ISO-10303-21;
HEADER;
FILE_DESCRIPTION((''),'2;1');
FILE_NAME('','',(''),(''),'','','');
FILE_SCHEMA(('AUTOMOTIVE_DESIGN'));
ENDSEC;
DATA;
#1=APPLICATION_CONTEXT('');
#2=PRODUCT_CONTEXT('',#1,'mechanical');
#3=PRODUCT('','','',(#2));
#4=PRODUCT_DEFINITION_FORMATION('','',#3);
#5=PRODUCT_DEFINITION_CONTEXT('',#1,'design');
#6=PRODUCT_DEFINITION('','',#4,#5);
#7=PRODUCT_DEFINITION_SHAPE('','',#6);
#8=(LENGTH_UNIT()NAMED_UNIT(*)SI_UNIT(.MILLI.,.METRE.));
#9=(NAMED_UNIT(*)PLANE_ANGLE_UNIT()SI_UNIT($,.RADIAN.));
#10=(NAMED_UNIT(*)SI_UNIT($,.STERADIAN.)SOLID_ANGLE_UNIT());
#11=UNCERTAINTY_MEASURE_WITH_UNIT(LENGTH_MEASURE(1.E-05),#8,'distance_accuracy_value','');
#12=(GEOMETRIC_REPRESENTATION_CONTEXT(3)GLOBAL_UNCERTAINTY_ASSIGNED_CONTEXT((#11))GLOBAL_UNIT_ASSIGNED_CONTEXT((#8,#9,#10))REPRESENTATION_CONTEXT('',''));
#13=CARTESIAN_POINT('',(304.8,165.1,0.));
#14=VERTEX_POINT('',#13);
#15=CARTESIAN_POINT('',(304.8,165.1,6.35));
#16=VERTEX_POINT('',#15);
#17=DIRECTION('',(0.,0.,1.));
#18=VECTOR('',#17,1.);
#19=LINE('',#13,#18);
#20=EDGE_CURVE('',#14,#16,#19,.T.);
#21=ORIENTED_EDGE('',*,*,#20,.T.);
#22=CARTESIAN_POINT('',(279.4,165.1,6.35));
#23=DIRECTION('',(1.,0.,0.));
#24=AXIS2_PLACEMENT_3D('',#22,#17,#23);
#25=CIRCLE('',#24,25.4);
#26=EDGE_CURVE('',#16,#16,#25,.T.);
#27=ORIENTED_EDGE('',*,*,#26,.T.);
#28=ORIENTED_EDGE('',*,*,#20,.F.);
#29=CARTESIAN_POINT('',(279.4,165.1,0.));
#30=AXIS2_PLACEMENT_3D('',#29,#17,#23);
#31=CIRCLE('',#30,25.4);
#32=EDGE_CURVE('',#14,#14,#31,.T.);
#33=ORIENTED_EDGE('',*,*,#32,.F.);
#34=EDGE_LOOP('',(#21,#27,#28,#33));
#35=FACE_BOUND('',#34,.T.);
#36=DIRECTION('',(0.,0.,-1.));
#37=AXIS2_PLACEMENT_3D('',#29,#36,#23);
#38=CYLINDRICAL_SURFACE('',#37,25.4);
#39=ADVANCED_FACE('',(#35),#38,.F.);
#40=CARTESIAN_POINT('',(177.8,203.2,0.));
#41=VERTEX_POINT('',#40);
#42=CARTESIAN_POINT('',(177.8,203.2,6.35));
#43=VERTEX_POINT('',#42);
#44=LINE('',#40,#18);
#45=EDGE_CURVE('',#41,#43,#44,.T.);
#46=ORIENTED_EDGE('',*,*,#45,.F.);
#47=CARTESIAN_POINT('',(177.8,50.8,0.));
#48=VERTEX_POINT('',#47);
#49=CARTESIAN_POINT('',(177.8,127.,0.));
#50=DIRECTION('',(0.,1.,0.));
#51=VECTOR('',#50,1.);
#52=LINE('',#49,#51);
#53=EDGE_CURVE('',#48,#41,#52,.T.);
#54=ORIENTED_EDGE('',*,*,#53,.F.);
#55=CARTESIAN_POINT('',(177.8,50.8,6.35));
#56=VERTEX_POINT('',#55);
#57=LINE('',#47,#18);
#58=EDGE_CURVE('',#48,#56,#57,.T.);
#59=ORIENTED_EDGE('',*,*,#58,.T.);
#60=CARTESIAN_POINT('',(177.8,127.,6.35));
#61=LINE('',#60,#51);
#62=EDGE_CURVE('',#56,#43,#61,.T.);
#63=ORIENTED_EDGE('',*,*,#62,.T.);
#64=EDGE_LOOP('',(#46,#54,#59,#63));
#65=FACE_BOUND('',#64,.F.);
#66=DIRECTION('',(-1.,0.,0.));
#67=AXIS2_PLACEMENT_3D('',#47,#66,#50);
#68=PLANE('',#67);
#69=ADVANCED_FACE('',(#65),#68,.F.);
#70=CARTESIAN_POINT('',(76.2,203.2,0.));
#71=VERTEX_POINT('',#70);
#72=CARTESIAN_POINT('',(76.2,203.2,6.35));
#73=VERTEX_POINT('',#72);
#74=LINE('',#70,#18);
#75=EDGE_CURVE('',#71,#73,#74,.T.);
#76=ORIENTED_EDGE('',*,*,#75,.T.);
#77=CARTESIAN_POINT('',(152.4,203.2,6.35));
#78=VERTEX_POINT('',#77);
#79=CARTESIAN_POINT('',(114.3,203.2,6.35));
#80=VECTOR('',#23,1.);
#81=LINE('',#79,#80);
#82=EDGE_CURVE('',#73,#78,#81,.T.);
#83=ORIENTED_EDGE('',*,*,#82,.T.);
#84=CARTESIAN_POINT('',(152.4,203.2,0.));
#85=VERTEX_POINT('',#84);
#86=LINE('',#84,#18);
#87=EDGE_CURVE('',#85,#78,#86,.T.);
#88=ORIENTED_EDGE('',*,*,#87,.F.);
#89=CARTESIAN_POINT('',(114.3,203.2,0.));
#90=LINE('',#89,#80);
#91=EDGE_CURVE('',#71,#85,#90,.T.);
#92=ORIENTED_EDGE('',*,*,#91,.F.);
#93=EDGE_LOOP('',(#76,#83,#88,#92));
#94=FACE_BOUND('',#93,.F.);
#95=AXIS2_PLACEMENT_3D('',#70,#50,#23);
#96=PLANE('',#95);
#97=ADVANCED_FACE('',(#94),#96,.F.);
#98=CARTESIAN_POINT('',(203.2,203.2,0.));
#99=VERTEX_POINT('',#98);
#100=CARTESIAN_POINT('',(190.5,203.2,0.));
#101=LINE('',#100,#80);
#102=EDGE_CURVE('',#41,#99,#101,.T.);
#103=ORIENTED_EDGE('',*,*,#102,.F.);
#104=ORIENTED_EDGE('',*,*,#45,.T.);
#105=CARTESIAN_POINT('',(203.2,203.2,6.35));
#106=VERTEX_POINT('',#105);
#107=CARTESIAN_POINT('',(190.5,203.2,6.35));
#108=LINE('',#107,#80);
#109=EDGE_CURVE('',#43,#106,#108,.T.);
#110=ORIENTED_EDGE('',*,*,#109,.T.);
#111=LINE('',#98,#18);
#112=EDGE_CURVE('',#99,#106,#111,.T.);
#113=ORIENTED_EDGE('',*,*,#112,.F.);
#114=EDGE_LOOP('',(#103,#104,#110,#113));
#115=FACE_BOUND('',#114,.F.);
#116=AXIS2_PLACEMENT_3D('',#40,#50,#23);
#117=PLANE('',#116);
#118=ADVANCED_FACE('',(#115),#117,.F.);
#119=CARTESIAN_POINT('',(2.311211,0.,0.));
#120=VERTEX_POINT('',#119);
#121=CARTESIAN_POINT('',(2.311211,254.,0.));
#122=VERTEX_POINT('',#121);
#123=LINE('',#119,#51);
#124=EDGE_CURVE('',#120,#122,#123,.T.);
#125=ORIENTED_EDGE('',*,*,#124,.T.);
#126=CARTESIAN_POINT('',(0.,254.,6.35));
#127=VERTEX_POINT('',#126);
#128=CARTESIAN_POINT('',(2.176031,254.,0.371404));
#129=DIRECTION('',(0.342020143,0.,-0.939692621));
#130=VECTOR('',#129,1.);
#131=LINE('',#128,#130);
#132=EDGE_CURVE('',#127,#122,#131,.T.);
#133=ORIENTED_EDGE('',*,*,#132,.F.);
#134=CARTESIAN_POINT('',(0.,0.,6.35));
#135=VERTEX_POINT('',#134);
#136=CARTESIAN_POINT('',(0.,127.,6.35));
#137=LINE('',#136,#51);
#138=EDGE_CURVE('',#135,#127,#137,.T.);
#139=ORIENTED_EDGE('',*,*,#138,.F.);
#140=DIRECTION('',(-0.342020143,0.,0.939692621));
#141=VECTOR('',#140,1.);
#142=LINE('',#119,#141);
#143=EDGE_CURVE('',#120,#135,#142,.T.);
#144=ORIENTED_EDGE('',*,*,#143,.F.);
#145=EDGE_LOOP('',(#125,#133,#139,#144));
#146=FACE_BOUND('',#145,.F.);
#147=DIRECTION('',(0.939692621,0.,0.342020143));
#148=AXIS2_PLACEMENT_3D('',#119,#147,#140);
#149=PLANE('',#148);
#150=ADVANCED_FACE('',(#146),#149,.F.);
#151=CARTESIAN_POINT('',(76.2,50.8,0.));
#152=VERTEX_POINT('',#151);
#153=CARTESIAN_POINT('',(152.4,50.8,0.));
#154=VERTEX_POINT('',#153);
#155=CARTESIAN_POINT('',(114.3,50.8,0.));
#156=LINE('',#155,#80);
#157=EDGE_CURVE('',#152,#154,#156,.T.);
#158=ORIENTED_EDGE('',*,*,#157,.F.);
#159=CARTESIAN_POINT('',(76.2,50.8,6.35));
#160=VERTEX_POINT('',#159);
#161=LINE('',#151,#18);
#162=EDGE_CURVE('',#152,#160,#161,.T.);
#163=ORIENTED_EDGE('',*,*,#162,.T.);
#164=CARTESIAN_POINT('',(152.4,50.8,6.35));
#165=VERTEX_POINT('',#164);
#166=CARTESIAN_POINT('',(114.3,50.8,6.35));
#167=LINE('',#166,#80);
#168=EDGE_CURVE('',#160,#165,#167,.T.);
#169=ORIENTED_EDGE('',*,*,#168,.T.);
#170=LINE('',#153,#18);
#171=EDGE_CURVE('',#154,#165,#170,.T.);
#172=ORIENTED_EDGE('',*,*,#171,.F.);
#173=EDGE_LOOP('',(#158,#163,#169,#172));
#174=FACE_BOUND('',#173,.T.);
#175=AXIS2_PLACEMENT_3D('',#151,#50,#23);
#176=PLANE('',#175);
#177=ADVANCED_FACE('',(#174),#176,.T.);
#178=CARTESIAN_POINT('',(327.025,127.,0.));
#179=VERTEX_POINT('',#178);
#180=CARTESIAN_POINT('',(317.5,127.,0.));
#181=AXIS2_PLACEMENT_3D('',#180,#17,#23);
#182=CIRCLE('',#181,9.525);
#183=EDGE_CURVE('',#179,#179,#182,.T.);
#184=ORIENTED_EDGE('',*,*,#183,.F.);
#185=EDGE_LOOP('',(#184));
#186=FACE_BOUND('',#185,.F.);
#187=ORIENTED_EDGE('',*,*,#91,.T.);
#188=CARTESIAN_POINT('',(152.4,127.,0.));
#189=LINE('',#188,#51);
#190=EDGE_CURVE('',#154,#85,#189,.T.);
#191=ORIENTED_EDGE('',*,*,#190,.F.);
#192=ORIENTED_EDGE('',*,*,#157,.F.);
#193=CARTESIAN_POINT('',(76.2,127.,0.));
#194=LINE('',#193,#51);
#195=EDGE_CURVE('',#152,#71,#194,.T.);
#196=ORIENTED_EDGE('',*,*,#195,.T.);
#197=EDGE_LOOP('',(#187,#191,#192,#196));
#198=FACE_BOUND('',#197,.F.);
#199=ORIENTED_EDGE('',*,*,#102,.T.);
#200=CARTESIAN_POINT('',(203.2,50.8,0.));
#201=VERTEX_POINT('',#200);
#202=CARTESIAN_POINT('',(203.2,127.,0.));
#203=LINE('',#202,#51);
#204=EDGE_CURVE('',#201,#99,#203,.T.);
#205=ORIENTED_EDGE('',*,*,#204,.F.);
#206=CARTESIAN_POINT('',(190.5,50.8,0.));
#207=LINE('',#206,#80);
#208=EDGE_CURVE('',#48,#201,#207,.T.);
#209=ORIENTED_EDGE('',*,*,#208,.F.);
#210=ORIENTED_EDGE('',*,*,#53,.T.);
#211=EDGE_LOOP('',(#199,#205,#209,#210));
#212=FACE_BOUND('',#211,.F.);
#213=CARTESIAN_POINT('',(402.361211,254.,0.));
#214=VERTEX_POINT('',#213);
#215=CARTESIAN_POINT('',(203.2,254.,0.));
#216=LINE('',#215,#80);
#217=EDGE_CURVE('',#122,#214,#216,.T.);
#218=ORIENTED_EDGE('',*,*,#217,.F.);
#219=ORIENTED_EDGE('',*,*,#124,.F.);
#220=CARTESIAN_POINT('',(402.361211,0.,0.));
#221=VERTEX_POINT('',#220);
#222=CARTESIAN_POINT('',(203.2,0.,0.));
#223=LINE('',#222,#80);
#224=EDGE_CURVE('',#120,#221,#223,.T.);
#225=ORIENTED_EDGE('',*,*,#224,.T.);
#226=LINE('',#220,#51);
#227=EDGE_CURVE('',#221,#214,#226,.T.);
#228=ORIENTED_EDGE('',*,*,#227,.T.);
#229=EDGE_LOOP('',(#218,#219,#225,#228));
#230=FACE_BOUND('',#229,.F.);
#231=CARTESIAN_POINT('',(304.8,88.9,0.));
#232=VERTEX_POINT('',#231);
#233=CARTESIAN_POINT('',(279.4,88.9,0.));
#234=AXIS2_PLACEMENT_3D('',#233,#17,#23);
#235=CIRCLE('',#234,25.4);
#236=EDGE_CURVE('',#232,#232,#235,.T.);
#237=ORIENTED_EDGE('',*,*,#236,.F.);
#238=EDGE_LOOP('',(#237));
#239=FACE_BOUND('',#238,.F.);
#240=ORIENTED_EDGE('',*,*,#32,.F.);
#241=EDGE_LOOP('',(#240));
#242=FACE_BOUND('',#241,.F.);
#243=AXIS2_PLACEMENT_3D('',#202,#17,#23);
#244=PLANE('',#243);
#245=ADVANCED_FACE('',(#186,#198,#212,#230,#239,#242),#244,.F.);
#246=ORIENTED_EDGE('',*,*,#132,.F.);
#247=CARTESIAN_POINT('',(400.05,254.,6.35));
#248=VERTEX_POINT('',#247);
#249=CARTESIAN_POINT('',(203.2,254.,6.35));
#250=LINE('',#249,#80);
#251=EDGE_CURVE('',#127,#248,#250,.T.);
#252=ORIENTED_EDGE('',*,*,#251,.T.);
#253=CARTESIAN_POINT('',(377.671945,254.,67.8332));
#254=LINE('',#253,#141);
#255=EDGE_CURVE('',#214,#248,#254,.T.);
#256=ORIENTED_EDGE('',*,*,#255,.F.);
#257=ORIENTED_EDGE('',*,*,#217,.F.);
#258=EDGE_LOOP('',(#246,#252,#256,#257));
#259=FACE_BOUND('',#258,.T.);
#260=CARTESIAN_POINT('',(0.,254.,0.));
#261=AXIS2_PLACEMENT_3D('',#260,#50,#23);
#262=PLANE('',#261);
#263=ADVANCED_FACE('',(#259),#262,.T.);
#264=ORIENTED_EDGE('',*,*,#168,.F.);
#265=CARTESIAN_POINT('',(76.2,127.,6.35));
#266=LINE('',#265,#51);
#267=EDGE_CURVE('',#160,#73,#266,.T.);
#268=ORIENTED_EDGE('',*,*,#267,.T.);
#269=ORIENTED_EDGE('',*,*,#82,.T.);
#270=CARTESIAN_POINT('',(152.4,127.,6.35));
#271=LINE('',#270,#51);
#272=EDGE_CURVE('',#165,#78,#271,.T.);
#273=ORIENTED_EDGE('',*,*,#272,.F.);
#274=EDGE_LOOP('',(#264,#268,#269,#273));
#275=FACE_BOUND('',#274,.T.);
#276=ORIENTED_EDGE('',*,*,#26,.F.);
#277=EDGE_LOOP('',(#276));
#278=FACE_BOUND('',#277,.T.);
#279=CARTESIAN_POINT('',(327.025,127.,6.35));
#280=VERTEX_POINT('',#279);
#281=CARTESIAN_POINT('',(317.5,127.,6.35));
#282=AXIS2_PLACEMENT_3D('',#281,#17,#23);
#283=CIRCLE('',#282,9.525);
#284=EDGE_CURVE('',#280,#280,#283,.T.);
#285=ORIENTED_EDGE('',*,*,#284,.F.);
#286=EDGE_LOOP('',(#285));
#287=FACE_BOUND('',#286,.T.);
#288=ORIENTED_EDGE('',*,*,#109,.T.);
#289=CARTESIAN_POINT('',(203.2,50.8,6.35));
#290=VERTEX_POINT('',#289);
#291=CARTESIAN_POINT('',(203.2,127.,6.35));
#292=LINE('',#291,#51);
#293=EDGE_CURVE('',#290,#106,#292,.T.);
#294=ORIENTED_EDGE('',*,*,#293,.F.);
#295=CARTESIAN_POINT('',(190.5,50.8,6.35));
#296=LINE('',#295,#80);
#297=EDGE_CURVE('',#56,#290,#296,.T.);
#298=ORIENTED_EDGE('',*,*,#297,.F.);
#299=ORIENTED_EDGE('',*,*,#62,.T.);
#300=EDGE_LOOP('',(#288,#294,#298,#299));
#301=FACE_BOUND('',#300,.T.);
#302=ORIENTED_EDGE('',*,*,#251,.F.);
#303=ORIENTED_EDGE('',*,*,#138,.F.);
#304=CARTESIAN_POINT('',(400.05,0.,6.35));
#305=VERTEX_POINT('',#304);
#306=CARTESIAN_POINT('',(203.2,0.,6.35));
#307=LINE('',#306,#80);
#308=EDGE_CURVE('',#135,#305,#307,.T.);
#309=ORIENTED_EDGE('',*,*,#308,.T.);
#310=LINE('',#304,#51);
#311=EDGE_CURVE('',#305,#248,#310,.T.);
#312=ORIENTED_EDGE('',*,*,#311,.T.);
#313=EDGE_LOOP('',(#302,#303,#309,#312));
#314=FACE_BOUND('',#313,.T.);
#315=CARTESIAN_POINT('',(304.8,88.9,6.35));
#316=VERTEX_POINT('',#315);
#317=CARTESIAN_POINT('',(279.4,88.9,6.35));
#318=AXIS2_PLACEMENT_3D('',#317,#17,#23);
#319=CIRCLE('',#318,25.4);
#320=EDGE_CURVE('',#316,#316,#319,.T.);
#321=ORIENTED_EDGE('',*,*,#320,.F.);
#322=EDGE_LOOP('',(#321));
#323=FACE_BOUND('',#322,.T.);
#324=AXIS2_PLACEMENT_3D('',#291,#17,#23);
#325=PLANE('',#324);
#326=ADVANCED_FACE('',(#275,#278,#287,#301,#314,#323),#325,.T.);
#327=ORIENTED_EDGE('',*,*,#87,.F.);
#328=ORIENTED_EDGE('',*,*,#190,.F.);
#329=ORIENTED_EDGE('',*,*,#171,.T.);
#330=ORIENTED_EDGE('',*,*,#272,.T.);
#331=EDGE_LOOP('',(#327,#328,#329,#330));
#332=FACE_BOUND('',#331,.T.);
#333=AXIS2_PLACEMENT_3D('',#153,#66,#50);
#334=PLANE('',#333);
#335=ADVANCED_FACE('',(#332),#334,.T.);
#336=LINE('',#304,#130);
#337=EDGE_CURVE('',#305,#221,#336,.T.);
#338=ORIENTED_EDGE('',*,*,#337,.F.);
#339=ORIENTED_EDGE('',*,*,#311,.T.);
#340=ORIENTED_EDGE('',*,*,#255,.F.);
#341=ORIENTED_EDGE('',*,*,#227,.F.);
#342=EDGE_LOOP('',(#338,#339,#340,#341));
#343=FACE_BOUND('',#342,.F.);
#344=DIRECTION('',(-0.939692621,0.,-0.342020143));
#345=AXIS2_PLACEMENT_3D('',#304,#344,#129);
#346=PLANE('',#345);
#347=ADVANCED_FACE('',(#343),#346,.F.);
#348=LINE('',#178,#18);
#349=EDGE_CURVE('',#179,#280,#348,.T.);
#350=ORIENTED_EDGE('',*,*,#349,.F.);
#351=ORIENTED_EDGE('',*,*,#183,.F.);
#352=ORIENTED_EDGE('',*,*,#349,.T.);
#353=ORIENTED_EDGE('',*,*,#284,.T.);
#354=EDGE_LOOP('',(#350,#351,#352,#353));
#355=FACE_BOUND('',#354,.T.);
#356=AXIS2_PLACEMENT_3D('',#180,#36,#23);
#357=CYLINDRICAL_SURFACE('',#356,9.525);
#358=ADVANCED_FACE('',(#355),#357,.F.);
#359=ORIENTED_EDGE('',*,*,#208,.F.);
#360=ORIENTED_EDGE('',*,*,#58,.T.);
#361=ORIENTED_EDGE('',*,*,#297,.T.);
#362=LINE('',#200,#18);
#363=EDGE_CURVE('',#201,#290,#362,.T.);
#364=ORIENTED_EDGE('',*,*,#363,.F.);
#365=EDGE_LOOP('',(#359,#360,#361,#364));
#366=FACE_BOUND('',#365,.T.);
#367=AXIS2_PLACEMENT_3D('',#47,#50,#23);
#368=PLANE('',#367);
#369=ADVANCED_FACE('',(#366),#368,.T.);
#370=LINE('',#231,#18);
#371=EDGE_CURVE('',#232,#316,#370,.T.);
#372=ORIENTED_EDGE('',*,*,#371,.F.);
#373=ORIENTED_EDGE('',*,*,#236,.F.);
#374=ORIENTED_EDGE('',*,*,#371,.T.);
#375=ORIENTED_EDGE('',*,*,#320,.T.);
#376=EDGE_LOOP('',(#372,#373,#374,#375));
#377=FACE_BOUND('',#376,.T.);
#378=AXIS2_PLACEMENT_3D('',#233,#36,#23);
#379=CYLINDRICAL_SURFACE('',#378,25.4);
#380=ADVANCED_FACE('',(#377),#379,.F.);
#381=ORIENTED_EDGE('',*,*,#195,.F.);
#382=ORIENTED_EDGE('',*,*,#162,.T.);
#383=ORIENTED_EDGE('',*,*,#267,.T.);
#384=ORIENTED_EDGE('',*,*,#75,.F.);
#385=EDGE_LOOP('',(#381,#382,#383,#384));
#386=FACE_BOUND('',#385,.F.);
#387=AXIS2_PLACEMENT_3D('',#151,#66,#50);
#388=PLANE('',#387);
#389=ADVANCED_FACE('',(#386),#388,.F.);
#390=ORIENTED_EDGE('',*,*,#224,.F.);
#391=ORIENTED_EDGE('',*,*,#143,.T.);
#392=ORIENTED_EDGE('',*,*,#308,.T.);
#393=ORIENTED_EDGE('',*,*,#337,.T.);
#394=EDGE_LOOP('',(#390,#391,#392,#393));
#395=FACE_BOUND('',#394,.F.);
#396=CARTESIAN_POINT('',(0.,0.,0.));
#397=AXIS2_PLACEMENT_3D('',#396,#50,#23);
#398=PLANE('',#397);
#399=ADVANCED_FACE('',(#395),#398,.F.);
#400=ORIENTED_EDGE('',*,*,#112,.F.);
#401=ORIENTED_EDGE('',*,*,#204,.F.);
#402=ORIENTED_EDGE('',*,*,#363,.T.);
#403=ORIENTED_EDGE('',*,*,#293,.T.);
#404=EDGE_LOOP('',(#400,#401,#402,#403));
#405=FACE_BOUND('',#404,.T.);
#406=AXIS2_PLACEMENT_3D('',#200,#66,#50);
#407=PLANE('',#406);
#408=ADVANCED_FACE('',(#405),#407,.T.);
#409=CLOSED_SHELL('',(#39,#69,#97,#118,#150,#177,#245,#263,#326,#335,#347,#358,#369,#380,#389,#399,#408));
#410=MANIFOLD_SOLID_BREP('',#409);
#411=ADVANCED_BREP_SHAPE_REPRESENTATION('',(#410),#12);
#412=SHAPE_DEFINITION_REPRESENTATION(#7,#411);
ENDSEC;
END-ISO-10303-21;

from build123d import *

# Parameters (mm, degrees)
F0_W     = 406.4
F0_H     = 254
F0_R     = 25.4
F0_W_2   = 76.2
F0_H_2   = 152.4
F0_W_3   = 25.4
F0_R_2   = 9.525
F1_DEPTH = 6.35
F3_DEPTH = 254.001
F5_DEPTH = 254.001


with BuildPart() as f1:
    # F0 (on Top) → F1 (new body)
    with BuildSketch(Plane.XY):
        with Locations((203.2, 127)):
            Rectangle(F0_W, F0_H)
        with Locations((279.4, 88.9)):
            Circle(F0_R, mode=Mode.SUBTRACT)
        with Locations((114.3, 127)):
            Rectangle(F0_W_2, F0_H_2, mode=Mode.SUBTRACT)
        with Locations((190.5, 127)):
            Rectangle(F0_W_3, F0_H_2, mode=Mode.SUBTRACT)
        with Locations((279.4, 165.1)):
            Circle(F0_R, mode=Mode.SUBTRACT)
        with Locations((317.5, 127)):
            Circle(F0_R_2, mode=Mode.SUBTRACT)
    extrude(amount=F1_DEPTH)

    # F2 (on face) → F3 (cut, through all)
    with BuildSketch(Plane.XZ):
        Polygon((2.3112109876, 0), (0, 6.35), (0, 0), align=None)
    extrude(amount=-F3_DEPTH, mode=Mode.SUBTRACT)

    # F4 (on face) → F5 (cut, through all)
    with BuildSketch(Plane.XZ):
        Polygon((400.05, 6.35), (402.3612109876, 0), (406.4, 0), (406.4, 6.35), align=None)
        Polygon((396.6623240103, 15.657563286), (400.05, 6.35), (406.4, 6.35), (406.4, 0), (417.733579874, 0), (417.733579874, 15.657563286), align=None)
    extrude(amount=-F5_DEPTH, mode=Mode.SUBTRACT)


solid = f1.part
